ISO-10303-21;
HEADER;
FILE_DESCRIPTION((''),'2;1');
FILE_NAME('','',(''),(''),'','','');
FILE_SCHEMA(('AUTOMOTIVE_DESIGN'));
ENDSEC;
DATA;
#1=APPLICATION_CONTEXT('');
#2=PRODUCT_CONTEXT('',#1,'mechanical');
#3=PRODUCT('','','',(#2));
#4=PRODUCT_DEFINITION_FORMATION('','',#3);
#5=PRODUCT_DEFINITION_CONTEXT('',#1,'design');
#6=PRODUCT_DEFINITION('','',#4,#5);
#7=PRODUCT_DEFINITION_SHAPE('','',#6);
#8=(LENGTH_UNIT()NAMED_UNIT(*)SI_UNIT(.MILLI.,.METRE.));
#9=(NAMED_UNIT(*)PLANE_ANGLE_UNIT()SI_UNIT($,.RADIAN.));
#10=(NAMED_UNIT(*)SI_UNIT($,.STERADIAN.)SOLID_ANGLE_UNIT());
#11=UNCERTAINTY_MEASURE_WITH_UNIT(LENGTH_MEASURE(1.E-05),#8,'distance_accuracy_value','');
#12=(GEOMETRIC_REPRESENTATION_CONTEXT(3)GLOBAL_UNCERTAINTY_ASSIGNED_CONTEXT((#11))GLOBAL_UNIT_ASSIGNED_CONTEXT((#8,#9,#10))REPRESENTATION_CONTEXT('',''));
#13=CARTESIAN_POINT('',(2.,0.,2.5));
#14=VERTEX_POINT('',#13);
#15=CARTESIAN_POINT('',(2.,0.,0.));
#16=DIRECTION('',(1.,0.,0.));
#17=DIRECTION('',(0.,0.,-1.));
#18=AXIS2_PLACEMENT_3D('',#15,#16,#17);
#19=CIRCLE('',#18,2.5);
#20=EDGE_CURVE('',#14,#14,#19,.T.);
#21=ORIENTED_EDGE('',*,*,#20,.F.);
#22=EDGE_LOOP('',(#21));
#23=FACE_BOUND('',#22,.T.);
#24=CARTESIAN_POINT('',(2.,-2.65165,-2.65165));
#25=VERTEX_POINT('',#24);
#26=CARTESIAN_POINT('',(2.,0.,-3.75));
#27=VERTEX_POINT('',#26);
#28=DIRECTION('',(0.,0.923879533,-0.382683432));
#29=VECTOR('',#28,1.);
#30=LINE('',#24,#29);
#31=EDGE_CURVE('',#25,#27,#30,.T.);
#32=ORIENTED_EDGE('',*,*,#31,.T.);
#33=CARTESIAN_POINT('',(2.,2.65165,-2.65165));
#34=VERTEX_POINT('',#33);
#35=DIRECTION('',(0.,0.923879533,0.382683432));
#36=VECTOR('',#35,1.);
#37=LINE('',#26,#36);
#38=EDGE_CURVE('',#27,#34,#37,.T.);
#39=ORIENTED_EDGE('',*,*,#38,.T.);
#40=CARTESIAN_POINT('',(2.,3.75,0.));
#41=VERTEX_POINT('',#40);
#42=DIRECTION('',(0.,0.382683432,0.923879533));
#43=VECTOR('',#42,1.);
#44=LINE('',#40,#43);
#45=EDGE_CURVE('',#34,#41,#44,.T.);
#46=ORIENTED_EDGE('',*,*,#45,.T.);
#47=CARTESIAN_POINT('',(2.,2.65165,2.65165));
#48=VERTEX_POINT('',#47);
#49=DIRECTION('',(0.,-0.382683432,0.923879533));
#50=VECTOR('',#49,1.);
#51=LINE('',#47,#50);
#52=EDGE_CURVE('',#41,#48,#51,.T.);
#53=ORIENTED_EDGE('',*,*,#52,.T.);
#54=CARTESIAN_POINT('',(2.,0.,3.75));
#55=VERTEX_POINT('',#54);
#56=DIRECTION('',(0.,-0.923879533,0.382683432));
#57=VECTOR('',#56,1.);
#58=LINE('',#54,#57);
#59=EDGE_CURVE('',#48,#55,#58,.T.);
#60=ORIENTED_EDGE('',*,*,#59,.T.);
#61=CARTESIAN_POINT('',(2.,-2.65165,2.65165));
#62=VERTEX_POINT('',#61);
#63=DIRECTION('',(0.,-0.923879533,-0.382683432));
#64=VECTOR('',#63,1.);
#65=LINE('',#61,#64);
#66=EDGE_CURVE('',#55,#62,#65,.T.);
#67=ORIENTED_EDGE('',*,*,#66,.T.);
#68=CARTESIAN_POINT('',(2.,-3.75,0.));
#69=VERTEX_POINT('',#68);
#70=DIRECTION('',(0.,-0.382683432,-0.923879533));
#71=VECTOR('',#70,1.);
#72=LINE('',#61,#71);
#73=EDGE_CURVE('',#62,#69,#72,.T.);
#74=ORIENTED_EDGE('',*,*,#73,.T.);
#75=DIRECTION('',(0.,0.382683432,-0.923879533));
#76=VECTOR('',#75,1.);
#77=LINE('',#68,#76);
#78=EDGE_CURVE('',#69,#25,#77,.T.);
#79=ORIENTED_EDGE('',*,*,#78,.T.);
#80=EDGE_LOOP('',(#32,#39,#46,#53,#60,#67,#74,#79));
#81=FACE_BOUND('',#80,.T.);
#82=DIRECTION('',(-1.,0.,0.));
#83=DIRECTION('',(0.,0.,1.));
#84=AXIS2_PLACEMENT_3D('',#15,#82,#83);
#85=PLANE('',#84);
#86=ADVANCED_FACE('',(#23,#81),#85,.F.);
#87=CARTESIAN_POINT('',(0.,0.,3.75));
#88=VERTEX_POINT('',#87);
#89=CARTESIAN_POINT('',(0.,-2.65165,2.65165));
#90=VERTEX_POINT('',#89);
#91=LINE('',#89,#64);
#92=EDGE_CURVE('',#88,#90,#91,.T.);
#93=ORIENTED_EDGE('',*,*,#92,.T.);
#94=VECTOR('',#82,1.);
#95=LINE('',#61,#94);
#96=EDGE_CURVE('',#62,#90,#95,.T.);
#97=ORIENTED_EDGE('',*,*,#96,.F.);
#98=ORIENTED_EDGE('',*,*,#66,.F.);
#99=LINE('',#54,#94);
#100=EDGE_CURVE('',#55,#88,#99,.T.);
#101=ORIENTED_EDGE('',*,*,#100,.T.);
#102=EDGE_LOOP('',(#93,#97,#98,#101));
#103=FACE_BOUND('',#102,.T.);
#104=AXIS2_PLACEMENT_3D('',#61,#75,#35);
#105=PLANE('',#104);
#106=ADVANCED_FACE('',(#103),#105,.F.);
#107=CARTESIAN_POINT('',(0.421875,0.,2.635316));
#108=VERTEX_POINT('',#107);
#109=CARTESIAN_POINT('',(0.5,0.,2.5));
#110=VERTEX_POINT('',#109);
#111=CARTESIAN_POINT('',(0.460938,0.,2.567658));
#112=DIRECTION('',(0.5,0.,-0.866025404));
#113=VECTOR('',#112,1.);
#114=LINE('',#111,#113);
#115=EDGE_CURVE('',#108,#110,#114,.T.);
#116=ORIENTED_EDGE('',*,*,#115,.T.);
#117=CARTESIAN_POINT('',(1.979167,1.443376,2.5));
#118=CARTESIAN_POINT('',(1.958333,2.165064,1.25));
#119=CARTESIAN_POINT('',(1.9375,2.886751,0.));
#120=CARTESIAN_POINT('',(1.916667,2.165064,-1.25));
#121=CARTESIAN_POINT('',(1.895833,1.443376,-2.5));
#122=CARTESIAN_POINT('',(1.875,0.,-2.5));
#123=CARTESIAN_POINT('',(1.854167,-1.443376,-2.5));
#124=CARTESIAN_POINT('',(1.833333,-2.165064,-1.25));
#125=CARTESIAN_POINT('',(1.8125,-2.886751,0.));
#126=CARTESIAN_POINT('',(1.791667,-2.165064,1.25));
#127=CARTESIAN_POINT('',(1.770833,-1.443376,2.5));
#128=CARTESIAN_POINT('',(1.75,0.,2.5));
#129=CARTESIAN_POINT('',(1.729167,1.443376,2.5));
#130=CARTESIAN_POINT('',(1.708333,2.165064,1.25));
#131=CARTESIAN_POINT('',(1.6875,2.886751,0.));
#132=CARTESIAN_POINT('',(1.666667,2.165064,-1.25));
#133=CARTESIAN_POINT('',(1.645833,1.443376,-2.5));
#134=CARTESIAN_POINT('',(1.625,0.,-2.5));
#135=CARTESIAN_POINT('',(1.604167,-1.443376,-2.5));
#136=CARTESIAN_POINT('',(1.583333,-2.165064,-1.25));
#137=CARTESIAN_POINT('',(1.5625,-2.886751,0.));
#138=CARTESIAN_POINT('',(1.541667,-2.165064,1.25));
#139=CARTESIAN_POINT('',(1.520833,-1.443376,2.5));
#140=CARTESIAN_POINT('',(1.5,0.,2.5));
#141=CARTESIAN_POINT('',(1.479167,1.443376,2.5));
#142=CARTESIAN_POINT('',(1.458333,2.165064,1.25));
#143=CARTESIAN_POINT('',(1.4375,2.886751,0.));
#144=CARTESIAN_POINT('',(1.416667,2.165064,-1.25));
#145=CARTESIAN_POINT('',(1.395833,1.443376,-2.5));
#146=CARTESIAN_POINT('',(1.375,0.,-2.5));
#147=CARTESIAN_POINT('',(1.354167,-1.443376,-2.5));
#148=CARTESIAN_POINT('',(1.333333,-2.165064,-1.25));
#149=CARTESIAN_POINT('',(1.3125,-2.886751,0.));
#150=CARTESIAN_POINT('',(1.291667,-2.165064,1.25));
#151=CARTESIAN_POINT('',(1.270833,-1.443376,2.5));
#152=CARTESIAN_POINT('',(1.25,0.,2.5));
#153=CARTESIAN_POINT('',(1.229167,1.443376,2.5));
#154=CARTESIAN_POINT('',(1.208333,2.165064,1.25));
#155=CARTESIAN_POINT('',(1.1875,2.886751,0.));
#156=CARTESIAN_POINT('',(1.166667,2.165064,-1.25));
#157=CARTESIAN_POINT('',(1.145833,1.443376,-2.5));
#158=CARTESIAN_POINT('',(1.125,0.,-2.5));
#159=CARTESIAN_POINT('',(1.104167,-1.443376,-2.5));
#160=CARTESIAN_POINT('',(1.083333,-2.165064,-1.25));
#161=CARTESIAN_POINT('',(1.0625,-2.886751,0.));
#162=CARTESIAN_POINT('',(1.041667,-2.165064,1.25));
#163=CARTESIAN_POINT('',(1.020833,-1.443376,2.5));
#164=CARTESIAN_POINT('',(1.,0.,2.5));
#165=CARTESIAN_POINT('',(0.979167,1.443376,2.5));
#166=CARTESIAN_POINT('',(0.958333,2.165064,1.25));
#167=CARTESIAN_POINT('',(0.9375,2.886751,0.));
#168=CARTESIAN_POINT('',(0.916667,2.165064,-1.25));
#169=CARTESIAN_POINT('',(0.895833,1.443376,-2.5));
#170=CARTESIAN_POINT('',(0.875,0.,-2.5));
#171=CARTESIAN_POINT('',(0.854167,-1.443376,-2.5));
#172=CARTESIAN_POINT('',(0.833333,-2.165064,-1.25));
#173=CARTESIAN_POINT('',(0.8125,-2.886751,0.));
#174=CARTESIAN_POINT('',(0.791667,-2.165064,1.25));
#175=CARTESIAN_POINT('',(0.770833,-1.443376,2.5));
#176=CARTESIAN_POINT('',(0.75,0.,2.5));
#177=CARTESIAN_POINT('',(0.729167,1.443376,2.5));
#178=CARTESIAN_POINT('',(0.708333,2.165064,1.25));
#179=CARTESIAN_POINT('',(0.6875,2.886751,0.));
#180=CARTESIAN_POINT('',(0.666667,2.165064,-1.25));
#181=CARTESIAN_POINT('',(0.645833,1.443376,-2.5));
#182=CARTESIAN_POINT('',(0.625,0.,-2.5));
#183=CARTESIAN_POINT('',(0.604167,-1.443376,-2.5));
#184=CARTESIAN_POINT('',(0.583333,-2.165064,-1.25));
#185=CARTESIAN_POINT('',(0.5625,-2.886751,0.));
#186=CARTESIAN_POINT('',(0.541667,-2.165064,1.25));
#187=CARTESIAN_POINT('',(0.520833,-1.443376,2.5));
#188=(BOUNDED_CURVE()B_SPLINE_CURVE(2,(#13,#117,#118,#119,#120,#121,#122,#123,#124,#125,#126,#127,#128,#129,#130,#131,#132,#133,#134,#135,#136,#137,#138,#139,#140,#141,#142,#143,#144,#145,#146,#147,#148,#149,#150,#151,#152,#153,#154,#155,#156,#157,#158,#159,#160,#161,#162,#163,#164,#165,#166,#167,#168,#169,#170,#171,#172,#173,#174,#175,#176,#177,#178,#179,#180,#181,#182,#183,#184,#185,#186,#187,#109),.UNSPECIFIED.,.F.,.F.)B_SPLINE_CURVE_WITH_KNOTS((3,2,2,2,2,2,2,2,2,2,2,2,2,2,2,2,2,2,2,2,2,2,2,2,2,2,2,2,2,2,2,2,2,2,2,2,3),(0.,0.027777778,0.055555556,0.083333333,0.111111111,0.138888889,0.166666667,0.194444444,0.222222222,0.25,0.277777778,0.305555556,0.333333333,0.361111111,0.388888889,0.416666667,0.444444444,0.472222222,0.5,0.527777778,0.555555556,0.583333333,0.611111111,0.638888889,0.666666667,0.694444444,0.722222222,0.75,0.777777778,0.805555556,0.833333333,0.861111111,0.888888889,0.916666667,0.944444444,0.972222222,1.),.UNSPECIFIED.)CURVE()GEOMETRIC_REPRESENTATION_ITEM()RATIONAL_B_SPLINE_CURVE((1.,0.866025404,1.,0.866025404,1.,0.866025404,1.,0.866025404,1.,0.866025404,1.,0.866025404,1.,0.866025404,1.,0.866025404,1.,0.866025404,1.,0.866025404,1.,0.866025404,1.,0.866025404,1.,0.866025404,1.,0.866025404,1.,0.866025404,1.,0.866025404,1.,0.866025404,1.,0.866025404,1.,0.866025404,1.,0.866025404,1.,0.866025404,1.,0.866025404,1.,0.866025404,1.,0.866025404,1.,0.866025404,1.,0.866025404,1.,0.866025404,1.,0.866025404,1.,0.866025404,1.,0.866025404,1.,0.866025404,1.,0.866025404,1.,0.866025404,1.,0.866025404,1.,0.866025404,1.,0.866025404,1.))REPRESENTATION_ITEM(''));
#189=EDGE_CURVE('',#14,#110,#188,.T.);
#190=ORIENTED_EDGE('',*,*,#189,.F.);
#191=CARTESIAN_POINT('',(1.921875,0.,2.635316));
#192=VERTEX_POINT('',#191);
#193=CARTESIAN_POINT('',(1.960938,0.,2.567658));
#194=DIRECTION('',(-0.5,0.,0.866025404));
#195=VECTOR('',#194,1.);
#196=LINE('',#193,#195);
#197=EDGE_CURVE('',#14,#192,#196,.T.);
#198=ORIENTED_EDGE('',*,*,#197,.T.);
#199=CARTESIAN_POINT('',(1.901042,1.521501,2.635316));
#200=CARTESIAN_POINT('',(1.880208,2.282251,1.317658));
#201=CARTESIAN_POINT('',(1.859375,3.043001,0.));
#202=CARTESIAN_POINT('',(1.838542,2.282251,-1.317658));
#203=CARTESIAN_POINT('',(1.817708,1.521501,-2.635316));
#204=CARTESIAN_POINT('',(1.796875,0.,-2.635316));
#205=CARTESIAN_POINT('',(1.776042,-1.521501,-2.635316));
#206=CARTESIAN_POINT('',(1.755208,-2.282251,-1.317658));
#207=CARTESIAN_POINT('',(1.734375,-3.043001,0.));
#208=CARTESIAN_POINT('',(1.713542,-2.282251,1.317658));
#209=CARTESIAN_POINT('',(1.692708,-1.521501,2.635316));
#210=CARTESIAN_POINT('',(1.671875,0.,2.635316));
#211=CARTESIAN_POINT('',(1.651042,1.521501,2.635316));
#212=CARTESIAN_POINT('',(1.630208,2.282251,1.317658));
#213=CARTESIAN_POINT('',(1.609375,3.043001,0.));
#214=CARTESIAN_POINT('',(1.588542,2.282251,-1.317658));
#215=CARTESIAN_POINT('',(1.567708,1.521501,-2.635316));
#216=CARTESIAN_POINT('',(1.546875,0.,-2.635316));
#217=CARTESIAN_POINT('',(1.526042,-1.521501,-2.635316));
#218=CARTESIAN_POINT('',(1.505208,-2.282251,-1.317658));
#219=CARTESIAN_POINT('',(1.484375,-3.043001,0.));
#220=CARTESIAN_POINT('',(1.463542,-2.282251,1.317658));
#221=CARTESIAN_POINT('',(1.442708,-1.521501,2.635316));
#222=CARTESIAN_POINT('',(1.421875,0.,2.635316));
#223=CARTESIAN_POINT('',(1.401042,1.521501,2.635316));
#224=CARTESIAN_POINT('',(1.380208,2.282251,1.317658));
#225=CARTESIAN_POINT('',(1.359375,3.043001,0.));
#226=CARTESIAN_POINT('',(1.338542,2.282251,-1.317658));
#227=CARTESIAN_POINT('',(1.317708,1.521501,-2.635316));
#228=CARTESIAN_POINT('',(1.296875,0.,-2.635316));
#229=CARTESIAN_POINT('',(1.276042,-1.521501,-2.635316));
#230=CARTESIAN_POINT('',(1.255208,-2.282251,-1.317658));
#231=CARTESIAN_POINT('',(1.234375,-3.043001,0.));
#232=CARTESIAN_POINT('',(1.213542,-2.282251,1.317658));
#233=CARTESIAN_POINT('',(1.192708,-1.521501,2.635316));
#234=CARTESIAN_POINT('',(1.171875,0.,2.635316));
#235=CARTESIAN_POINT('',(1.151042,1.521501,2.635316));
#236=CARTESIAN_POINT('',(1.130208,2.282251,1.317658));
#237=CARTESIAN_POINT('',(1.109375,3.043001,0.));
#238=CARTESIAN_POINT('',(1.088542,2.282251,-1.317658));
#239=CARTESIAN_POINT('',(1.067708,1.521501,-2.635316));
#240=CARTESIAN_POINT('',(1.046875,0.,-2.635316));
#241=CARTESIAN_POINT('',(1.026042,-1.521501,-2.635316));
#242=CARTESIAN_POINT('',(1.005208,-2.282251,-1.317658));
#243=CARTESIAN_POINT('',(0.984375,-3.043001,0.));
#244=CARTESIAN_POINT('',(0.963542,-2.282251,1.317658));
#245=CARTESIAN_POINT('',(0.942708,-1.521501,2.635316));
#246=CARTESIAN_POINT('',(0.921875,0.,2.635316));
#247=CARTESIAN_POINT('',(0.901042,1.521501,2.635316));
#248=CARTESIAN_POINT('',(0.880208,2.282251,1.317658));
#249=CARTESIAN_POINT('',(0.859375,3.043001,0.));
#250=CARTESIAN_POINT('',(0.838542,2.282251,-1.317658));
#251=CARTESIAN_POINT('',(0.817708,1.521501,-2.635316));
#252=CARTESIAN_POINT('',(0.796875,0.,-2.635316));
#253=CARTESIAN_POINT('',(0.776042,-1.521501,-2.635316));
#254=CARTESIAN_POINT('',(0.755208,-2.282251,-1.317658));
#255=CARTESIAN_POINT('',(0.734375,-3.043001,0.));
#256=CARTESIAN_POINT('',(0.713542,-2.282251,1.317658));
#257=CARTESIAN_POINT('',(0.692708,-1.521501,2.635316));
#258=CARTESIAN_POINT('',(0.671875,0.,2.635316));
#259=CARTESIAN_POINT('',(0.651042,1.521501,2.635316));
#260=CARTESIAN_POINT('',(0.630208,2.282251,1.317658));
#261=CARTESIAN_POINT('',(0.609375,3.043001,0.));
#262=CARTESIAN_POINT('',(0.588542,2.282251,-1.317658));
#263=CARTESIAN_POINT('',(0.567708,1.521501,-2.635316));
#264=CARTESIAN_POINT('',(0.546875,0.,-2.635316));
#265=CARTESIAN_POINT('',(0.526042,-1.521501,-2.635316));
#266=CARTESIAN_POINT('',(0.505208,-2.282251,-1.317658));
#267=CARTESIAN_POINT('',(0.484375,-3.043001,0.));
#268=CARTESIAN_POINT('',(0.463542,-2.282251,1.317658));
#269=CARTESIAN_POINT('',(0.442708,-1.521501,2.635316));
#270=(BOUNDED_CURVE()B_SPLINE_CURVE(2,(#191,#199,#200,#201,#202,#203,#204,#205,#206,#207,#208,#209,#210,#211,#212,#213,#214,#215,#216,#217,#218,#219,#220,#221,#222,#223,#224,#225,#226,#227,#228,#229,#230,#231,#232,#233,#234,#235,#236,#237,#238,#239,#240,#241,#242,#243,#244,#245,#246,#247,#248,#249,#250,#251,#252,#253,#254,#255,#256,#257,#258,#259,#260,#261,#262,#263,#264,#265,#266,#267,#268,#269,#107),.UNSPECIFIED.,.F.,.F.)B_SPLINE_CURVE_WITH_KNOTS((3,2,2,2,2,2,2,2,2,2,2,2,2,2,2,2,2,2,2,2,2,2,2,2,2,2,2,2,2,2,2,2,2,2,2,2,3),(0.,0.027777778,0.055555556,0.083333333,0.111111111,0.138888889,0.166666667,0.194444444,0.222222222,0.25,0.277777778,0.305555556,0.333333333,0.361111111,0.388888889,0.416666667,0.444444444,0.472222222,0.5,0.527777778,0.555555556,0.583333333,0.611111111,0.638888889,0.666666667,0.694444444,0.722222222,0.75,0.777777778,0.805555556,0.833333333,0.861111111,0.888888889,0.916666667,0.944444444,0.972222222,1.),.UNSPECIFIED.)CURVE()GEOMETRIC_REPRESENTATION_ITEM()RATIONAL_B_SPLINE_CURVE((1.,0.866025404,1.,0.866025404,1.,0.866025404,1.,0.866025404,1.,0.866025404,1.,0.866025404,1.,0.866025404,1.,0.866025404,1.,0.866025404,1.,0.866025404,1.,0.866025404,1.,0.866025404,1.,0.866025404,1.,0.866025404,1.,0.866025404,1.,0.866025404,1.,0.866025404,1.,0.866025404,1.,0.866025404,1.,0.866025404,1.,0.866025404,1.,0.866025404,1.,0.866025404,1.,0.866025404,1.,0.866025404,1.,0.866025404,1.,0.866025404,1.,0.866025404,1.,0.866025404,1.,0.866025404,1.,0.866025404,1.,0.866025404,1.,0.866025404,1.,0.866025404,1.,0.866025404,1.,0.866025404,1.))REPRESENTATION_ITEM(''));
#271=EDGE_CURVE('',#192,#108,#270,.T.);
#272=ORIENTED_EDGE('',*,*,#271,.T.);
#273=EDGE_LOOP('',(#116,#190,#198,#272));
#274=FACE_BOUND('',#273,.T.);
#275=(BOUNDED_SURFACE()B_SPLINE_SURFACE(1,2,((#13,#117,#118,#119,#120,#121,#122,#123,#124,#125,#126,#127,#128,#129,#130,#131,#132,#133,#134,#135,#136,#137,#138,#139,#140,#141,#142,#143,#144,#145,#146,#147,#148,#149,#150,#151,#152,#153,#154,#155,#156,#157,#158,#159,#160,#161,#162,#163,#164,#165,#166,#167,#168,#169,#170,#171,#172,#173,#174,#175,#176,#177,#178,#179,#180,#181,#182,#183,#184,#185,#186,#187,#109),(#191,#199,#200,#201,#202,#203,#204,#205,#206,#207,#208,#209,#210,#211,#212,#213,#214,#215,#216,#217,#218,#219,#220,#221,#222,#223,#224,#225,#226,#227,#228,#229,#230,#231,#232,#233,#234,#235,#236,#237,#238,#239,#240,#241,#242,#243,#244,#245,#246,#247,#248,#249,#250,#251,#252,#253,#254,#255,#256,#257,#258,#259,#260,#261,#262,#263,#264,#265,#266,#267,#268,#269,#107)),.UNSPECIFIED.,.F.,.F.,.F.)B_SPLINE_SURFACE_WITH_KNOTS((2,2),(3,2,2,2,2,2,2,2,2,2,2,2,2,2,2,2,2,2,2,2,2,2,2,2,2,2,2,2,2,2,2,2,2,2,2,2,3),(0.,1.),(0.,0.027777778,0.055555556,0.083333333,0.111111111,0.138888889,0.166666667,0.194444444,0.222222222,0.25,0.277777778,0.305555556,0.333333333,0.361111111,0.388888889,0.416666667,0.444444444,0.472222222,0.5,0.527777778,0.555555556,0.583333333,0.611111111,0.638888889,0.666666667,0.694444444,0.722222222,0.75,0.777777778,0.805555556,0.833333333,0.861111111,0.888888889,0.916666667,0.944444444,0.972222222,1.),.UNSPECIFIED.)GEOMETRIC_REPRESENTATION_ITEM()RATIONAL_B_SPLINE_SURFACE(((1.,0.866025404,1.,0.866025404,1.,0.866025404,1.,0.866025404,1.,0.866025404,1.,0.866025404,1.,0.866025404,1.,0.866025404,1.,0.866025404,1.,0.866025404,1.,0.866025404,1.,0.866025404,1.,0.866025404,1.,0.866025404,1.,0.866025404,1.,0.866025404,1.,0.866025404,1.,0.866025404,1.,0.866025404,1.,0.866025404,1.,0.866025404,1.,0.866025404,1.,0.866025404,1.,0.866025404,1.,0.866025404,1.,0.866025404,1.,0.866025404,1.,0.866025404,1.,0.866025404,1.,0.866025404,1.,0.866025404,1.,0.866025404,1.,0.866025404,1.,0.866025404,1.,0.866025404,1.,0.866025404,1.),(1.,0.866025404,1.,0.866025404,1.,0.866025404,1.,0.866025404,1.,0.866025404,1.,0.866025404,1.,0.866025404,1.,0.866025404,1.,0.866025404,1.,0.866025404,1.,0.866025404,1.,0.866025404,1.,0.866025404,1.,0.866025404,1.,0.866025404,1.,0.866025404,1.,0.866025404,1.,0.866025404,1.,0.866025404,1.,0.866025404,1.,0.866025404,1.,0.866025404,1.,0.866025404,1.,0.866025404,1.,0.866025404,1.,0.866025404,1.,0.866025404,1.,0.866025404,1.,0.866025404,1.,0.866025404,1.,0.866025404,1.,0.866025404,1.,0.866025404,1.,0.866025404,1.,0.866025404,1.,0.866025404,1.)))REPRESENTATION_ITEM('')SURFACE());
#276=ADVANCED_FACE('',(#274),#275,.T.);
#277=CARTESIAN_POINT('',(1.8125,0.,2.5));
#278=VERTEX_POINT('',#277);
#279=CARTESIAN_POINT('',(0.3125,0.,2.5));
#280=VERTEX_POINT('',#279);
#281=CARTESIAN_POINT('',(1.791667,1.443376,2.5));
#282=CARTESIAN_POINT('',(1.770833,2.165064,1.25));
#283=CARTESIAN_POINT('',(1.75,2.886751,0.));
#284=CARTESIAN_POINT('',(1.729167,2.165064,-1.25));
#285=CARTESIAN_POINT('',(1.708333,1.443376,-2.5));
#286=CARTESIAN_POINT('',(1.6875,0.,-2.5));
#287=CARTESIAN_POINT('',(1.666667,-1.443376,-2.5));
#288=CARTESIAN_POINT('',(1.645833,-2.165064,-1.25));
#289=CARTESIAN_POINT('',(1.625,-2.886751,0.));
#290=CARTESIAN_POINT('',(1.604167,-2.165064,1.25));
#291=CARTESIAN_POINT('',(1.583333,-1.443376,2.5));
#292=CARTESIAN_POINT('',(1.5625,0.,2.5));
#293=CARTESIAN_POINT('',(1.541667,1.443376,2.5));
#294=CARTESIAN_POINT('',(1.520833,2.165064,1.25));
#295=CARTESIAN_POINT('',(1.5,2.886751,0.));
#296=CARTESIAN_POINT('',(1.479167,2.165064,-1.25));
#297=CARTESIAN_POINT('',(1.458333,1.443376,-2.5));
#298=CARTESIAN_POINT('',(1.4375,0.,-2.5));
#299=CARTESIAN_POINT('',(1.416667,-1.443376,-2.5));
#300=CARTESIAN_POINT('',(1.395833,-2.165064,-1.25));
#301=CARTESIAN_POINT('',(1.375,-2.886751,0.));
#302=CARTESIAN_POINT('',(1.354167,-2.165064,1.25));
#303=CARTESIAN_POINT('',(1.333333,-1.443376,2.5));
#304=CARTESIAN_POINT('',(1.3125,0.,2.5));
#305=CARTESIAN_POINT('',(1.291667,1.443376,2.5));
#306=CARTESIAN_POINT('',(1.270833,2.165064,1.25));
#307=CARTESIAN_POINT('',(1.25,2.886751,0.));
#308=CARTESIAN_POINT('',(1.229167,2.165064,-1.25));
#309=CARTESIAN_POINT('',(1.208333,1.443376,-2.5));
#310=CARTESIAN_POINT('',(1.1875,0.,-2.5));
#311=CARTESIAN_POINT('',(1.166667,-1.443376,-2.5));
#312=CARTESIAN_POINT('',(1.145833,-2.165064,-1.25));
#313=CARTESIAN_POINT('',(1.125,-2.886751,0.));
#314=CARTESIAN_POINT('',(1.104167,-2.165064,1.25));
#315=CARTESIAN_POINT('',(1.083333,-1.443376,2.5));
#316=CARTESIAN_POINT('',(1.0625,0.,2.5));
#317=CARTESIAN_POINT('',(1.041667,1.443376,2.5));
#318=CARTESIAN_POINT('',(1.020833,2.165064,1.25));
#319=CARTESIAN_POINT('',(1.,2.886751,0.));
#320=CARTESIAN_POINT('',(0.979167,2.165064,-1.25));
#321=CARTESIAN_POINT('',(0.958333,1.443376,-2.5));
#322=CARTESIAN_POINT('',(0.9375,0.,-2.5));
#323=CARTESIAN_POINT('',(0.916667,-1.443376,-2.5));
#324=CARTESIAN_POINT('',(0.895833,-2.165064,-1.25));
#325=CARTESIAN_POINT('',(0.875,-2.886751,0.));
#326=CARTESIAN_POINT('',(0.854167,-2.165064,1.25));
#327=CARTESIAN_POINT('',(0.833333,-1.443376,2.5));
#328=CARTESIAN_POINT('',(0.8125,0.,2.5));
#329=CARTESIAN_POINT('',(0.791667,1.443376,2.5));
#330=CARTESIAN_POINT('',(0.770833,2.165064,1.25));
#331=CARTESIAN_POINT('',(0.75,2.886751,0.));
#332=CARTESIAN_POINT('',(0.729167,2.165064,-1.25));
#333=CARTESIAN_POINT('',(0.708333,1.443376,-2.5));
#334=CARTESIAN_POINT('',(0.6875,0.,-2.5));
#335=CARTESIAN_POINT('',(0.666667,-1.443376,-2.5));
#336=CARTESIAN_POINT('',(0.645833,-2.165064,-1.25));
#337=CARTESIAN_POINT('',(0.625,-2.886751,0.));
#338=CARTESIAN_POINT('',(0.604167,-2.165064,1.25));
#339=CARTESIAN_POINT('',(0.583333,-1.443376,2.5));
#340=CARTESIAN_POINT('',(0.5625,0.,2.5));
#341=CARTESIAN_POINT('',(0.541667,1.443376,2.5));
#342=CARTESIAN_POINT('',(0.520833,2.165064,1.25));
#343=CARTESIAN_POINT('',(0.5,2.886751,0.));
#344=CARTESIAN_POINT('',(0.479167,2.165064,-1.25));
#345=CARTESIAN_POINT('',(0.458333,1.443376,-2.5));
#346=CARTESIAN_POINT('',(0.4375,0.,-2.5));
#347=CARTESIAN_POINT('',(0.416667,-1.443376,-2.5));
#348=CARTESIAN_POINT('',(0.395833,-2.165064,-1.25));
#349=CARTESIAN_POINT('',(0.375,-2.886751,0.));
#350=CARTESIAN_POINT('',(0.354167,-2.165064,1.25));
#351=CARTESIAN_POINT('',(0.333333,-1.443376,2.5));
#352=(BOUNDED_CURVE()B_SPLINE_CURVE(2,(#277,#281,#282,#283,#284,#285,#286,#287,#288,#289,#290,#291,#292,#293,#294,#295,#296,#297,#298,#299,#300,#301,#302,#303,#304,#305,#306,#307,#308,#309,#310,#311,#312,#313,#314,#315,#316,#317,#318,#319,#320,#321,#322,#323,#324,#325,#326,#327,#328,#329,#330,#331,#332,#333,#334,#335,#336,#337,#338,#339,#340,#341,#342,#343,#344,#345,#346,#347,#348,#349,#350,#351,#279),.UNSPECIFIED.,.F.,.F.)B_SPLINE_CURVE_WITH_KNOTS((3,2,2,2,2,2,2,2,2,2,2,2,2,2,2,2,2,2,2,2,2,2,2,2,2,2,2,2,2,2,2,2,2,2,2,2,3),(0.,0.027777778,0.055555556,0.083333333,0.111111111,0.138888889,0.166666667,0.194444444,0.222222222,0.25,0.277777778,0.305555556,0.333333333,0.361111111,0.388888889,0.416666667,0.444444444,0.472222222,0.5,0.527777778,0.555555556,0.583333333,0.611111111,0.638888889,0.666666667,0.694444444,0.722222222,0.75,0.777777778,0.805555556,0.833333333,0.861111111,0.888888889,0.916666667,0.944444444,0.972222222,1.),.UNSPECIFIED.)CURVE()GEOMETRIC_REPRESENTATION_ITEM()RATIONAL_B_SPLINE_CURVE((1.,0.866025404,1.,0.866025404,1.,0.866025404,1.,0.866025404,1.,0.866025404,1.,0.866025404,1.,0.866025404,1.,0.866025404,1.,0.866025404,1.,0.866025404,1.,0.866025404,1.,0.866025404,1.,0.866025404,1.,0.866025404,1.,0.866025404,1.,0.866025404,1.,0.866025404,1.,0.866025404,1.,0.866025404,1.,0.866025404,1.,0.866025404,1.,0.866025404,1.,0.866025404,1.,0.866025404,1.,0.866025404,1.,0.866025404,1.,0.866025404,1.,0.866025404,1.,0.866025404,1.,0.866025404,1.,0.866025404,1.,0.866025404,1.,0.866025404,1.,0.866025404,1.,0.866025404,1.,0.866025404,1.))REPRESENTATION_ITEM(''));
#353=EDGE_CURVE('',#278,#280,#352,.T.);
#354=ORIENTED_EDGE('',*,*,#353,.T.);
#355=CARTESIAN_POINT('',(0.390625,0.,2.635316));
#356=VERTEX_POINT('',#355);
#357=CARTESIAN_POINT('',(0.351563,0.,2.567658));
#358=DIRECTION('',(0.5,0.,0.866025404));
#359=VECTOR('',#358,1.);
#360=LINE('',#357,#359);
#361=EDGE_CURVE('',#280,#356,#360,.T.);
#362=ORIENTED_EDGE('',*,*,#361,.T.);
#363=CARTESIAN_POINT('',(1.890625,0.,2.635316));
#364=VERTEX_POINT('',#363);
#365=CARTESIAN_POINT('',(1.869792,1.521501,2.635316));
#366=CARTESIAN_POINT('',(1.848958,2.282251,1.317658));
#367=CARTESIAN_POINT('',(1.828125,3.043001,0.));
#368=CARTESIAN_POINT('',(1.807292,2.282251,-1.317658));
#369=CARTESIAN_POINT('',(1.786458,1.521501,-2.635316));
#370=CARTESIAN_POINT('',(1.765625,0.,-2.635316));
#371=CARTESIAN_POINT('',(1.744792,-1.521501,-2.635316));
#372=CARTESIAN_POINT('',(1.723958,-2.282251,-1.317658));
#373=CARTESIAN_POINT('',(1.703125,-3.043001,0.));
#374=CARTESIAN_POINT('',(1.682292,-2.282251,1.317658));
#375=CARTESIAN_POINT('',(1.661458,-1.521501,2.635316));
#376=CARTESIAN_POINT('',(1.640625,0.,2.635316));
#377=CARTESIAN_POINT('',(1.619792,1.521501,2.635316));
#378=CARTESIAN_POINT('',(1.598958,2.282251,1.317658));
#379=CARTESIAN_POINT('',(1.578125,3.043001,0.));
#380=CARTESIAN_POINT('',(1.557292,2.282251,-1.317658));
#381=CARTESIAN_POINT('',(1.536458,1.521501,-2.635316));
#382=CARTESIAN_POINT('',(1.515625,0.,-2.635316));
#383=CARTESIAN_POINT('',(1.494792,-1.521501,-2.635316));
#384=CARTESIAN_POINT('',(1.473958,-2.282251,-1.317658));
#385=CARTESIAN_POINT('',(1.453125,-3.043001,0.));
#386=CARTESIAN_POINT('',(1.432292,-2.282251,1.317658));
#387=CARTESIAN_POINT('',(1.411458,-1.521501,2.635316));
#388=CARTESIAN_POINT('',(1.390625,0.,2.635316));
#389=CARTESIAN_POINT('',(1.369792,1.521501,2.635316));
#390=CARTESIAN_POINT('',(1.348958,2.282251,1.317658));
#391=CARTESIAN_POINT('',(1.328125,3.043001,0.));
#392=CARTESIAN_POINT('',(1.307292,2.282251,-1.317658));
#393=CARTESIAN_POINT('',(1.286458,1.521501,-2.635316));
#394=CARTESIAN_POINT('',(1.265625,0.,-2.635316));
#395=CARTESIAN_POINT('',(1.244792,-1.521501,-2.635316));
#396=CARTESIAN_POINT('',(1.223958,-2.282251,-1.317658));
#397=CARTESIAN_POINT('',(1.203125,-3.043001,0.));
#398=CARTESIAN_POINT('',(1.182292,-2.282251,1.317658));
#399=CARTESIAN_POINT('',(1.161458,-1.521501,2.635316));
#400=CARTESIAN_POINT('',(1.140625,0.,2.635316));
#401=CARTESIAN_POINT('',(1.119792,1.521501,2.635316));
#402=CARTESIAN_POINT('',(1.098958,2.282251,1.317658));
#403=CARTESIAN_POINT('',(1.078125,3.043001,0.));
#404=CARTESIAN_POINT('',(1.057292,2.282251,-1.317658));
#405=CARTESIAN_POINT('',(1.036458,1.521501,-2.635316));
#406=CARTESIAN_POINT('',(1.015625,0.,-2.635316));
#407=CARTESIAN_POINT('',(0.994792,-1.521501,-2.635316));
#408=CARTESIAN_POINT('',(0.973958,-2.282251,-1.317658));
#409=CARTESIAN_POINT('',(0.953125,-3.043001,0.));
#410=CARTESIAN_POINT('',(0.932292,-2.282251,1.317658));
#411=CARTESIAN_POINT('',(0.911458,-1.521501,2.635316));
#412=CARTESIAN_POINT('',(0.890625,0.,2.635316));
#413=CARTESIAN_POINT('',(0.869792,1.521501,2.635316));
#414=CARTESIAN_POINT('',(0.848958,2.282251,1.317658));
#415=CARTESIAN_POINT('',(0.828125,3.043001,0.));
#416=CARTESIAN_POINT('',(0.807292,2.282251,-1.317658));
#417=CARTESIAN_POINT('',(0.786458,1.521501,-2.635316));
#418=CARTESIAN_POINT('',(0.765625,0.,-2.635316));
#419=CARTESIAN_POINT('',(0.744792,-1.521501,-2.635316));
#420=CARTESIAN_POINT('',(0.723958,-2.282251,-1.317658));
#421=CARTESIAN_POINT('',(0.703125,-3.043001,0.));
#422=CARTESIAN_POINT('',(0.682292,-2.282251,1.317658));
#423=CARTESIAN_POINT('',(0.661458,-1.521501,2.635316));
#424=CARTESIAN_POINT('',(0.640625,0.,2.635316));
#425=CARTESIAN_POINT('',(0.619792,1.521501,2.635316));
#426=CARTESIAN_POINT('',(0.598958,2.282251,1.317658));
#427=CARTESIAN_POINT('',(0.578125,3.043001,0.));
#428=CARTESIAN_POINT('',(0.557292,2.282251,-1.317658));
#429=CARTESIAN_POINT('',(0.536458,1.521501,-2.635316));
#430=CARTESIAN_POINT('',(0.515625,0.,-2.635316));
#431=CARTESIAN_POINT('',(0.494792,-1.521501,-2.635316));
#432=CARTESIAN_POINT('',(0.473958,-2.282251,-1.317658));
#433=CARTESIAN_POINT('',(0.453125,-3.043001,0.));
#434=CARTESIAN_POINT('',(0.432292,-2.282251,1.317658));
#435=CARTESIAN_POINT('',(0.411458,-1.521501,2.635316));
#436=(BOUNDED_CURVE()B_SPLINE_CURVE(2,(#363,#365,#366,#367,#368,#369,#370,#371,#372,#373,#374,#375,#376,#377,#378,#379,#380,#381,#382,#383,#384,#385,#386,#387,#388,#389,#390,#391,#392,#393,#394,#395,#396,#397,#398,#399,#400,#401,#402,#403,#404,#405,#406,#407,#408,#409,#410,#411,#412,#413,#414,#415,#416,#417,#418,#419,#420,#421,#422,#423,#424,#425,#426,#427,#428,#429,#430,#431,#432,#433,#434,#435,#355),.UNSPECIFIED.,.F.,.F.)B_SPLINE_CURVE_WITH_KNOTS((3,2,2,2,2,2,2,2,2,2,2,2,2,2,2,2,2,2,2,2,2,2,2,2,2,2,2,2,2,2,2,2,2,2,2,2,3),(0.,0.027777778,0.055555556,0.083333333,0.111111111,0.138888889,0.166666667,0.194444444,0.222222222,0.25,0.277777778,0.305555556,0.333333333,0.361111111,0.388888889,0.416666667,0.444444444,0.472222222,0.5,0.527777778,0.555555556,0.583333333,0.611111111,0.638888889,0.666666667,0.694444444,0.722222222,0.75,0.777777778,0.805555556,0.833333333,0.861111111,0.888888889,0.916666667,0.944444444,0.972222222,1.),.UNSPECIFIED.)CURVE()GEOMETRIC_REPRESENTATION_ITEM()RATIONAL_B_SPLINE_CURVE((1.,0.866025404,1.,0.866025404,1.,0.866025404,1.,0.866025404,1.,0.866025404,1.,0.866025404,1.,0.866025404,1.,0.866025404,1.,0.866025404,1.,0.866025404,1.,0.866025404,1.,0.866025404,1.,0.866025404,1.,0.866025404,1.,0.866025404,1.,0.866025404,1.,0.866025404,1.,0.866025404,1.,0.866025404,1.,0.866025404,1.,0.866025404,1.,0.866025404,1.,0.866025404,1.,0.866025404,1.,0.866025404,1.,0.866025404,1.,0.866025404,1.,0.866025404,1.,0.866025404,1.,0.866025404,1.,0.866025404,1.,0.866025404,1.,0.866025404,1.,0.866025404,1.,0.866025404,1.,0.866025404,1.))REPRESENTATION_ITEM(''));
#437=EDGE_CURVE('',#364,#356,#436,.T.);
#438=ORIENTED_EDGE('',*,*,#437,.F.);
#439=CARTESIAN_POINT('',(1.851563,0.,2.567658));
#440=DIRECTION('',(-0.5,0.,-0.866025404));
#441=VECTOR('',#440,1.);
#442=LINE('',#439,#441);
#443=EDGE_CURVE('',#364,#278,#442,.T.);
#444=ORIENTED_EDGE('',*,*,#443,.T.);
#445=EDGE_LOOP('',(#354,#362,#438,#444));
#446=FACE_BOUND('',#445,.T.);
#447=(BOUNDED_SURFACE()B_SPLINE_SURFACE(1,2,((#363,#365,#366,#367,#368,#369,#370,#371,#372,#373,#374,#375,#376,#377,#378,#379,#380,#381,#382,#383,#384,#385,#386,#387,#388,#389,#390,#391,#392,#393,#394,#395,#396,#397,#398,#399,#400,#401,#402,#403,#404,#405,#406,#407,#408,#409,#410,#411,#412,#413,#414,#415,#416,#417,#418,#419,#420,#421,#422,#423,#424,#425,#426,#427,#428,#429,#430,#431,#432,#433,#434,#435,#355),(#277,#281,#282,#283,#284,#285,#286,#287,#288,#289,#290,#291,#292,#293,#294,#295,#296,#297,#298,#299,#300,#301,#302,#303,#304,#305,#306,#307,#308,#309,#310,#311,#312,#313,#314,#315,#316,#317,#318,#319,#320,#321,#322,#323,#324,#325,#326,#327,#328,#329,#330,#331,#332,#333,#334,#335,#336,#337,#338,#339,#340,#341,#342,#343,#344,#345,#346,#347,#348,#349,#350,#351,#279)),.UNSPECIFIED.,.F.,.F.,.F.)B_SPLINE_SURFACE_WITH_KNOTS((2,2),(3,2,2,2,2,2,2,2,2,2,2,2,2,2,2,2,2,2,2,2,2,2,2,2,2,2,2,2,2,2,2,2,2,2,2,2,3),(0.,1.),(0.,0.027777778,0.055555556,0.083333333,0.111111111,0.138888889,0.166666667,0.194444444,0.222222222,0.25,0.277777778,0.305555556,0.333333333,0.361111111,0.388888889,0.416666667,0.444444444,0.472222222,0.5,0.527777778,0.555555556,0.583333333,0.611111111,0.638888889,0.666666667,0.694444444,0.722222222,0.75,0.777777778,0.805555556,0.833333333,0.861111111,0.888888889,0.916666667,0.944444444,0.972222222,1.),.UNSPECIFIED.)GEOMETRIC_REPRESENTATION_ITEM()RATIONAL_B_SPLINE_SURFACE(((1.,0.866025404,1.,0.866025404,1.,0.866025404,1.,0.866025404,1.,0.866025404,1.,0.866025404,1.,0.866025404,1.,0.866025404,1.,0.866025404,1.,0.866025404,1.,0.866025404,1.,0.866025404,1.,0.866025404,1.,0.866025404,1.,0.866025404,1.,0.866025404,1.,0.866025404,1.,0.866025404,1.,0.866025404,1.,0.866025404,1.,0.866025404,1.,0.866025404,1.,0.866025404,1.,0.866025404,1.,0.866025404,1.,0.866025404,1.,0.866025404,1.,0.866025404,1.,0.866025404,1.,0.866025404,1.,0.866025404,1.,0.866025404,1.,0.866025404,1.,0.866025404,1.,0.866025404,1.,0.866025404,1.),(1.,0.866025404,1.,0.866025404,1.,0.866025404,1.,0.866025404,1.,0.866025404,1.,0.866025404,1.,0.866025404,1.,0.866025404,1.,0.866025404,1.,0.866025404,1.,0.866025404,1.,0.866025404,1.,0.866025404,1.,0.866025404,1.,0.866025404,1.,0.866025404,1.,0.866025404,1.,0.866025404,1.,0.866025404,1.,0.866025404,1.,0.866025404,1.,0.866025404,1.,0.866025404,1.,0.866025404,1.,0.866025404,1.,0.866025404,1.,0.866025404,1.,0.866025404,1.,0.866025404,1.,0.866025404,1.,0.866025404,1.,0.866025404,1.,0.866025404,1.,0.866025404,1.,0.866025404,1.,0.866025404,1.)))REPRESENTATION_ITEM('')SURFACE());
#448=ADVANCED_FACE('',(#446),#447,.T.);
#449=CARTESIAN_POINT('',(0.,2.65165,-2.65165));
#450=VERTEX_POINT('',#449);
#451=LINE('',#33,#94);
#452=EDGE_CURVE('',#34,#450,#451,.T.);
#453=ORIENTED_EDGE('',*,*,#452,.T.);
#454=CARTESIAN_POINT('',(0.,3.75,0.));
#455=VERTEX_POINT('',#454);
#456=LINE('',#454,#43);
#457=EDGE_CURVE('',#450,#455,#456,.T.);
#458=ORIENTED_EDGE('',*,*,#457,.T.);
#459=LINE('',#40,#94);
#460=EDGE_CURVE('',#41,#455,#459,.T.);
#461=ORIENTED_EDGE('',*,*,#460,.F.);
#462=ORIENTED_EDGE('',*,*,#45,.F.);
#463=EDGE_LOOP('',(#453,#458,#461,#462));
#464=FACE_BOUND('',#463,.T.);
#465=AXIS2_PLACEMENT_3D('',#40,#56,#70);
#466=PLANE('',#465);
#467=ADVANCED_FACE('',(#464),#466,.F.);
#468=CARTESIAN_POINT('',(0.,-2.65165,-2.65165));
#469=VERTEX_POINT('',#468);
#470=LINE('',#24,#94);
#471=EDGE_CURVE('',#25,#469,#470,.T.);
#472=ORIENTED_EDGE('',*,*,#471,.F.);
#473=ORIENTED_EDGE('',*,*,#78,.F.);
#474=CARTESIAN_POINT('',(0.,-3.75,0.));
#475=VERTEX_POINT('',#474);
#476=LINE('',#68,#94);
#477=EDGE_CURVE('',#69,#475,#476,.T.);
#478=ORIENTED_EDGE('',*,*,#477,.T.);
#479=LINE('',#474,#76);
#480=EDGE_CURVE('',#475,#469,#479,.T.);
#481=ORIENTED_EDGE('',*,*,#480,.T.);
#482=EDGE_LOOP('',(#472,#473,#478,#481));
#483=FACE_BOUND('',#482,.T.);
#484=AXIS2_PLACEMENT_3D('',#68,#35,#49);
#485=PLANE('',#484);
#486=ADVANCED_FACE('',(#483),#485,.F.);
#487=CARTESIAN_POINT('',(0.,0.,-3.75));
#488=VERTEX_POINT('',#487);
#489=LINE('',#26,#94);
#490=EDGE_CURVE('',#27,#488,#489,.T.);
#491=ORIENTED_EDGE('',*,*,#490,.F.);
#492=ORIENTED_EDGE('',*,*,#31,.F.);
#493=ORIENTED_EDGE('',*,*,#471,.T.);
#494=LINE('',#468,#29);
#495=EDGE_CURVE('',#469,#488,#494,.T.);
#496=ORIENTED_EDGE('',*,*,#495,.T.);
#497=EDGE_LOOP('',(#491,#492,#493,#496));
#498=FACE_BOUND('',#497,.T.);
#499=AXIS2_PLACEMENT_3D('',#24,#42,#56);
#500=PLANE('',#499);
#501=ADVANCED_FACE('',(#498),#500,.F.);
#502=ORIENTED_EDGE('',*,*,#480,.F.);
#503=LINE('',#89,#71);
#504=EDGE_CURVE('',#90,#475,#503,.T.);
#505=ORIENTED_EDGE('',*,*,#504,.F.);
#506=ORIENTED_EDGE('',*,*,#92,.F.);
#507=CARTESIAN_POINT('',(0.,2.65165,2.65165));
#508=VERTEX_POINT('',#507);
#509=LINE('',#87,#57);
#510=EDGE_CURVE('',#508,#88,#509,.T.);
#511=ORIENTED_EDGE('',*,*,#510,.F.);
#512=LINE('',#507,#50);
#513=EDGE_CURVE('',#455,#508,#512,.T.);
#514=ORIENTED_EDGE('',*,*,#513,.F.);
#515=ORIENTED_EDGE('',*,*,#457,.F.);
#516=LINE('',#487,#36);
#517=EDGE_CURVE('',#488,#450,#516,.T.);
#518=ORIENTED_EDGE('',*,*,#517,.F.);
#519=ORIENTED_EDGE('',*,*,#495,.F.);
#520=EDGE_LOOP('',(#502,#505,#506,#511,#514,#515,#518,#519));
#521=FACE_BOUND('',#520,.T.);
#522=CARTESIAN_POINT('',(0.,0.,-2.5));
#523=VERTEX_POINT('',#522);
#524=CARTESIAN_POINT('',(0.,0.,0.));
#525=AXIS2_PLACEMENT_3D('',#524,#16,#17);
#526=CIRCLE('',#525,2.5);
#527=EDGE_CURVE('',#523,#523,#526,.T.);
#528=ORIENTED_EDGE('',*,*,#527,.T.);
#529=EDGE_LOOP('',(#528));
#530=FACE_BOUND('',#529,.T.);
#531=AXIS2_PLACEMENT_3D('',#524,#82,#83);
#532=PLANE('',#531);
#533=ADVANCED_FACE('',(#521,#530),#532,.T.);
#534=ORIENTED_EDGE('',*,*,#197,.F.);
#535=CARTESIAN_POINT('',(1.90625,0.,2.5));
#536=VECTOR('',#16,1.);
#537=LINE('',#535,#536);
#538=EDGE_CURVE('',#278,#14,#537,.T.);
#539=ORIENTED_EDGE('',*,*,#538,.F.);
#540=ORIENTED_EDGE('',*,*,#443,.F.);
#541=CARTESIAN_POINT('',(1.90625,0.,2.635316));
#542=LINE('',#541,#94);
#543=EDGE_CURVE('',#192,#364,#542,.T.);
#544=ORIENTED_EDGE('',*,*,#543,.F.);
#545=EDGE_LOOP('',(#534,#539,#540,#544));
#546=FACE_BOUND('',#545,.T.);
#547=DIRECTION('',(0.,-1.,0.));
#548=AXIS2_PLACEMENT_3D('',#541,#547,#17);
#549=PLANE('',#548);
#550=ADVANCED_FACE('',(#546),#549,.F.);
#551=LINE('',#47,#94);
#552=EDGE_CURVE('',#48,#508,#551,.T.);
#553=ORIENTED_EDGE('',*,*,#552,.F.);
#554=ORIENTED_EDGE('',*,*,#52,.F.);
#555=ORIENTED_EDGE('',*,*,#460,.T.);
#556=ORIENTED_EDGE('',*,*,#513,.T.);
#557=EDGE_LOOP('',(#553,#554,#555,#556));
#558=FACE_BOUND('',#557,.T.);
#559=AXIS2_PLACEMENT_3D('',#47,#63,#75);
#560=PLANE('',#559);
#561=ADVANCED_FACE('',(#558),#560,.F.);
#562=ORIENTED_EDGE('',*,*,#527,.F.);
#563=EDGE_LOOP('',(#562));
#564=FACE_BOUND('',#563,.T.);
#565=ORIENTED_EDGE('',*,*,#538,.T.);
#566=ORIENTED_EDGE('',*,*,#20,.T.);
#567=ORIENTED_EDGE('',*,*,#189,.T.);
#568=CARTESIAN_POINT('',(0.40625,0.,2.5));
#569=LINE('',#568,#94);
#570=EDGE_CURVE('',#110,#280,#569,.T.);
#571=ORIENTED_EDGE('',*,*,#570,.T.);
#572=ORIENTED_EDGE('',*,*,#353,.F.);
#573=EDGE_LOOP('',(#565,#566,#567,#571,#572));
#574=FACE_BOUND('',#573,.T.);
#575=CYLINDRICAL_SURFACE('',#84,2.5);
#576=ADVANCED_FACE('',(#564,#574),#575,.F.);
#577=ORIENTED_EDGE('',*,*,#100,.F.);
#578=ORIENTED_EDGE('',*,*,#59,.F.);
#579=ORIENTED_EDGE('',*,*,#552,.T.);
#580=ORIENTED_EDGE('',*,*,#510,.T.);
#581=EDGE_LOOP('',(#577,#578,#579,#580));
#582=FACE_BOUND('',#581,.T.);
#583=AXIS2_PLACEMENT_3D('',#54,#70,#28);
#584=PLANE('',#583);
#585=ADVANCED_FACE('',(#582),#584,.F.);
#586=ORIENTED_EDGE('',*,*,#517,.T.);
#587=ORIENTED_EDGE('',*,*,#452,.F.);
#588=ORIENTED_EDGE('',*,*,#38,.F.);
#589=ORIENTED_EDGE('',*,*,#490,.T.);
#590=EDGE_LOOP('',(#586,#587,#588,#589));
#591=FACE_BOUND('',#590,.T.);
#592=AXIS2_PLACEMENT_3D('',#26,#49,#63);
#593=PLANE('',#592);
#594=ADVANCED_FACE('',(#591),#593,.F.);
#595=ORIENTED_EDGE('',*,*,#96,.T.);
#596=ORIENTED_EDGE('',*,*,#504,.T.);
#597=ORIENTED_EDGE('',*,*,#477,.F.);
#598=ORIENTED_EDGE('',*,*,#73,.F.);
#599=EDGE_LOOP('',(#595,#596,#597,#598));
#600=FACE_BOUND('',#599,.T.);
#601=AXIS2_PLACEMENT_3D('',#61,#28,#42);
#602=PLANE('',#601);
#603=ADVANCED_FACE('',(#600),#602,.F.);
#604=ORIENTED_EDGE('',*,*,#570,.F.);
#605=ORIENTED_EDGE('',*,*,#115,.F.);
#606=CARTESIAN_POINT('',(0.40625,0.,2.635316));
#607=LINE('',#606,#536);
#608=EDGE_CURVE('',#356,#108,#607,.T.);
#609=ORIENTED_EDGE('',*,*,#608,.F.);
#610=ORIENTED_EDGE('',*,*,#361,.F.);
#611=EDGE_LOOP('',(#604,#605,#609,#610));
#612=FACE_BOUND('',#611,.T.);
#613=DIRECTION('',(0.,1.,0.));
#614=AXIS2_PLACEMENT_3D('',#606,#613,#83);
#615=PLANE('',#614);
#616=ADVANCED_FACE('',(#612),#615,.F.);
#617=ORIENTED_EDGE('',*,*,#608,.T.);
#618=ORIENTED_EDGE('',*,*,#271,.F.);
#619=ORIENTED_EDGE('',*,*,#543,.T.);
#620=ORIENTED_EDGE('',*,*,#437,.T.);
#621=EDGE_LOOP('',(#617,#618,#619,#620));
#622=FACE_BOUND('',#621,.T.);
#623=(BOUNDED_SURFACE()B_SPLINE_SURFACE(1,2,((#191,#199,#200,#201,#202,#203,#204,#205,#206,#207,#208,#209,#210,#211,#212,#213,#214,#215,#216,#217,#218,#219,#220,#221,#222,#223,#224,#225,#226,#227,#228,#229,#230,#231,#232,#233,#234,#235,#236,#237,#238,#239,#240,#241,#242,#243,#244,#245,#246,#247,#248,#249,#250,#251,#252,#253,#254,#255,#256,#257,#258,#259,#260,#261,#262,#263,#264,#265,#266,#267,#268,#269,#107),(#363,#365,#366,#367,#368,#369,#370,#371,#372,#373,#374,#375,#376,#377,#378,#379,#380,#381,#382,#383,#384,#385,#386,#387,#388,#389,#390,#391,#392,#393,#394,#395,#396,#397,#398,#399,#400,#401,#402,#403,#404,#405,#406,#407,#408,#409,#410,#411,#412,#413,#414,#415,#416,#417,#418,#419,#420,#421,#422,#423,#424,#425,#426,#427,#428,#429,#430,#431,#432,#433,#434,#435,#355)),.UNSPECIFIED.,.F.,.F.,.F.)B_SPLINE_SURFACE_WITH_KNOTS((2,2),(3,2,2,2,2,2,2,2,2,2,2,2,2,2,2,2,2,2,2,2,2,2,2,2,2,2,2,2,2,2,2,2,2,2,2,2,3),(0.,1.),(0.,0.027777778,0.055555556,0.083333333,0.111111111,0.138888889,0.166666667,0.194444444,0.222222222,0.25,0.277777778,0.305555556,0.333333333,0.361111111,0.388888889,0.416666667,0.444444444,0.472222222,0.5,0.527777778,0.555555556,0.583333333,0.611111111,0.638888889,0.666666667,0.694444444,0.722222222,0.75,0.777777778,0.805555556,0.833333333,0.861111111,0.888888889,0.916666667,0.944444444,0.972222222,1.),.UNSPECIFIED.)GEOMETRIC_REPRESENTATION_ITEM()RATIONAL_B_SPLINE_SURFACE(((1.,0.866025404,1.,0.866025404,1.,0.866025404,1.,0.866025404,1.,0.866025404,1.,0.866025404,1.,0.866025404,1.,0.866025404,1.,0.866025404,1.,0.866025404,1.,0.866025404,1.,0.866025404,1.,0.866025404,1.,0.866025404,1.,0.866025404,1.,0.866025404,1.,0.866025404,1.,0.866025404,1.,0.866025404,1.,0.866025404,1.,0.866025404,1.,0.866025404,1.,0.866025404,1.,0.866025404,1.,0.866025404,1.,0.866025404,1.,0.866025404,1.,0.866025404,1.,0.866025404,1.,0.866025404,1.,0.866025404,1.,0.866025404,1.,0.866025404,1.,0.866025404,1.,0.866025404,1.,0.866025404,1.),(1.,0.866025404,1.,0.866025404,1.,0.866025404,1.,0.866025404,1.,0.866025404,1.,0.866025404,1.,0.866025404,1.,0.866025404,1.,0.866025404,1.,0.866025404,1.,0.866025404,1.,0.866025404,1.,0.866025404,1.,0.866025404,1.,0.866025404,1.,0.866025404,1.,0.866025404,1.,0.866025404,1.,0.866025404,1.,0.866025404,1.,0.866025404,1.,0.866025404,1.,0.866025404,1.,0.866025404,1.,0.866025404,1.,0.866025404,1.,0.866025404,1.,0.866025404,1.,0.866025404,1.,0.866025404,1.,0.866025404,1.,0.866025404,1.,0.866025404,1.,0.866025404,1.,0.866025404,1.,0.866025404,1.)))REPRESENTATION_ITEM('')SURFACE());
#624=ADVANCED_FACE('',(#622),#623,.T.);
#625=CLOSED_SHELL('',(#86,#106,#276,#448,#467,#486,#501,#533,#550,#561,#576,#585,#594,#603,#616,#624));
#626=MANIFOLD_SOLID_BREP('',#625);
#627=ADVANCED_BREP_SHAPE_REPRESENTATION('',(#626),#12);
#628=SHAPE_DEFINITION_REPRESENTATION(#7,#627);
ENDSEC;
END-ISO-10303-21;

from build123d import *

# Parameters (mm, degrees)
SKETCH1_R           = 2.5
BOSS_EXTRUDE1_DEPTH = 2
THREAD1_PITCH       = 0.25


with BuildPart() as part:
    # Sketch1 → Boss-Extrude1 (new body)
    with BuildSketch(Plane(origin=(0, 0, 0), x_dir=(0, 0, -1), z_dir=(1, 0, 0))):
        Polygon((-2.651650429, 2.651650429), (0, 3.75), (2.651650429, 2.651650429), (3.75, 0), (2.651650429, -2.651650429), (0, -3.75), (-2.651650429, -2.651650429), (-3.75, 0), align=None)
        Circle(SKETCH1_R, mode=Mode.SUBTRACT)
    extrude(amount=BOSS_EXTRUDE1_DEPTH)

    # Thread1: the profile of Thread Profile1 profile screwed along a right-hand helix of 6 turns, 6 arcs to a turn; built about Z, then put on its axis
    thread1_z = Axis((0, 0, 0), (0, 0, 1))
    thread1_corners = [(2.4997, 0, -0.000173205), (2.635316469, 0, 0.078125), (2.635316469, 0, 0.109375), (2.4997, 0, 0.187673204)]
    with BuildLine(mode=Mode.PRIVATE) as thread1_profile:
        Line(thread1_corners[0], thread1_corners[1])
        Line(thread1_corners[1], thread1_corners[2])
        Line(thread1_corners[2], thread1_corners[3])
        Line(thread1_corners[3], thread1_corners[0])
    thread1_cap = Face(thread1_profile.wire())
    thread1_turn_angles = [0, 30, 60, 90, 120, 150, 180, 210, 240, 270, 300, 330, 360]
    thread1_turn_weights = [1, 0.8660254037844387, 1, 0.8660254037844387, 1, 0.8660254037844387, 1, 0.8660254037844387, 1, 0.8660254037844387, 1, 0.8660254037844387, 1]
    thread1_turn_rails = [Edge.make_bspline([Vector(p[0], p[1], 0).rotate(thread1_z, thread1_turn_angles[k]) / thread1_turn_weights[k] + Vector(0, 0, p[2] + THREAD1_PITCH * thread1_turn_angles[k] / 360) for k in range(13)], [0, 0, 0, 1, 1, 2, 2, 3, 3, 4, 4, 5, 5, 6, 6, 6], 2, thread1_turn_weights) for p in thread1_corners]
    thread1_turn_sides = [Face.make_surface_from_curves(thread1_turn_rails[p[0]], thread1_turn_rails[p[1]]) for p in [(0, 1), (1, 2), (2, 3), (3, 0)]]
    thread1 = Plane(origin=(2, 0, 0), x_dir=(0, 0, 1), z_dir=(-1, 0, 0)) * Solid(Shell([*[p.moved(Location((0, 0, THREAD1_PITCH * i))) for i in range(6) for p in thread1_turn_sides], thread1_cap, thread1_cap.rotate(thread1_z, 2160).moved(Location((0, 0, THREAD1_PITCH * 2160 / 360)))]))
    add(thread1, mode=Mode.SUBTRACT)


solid = part.part
